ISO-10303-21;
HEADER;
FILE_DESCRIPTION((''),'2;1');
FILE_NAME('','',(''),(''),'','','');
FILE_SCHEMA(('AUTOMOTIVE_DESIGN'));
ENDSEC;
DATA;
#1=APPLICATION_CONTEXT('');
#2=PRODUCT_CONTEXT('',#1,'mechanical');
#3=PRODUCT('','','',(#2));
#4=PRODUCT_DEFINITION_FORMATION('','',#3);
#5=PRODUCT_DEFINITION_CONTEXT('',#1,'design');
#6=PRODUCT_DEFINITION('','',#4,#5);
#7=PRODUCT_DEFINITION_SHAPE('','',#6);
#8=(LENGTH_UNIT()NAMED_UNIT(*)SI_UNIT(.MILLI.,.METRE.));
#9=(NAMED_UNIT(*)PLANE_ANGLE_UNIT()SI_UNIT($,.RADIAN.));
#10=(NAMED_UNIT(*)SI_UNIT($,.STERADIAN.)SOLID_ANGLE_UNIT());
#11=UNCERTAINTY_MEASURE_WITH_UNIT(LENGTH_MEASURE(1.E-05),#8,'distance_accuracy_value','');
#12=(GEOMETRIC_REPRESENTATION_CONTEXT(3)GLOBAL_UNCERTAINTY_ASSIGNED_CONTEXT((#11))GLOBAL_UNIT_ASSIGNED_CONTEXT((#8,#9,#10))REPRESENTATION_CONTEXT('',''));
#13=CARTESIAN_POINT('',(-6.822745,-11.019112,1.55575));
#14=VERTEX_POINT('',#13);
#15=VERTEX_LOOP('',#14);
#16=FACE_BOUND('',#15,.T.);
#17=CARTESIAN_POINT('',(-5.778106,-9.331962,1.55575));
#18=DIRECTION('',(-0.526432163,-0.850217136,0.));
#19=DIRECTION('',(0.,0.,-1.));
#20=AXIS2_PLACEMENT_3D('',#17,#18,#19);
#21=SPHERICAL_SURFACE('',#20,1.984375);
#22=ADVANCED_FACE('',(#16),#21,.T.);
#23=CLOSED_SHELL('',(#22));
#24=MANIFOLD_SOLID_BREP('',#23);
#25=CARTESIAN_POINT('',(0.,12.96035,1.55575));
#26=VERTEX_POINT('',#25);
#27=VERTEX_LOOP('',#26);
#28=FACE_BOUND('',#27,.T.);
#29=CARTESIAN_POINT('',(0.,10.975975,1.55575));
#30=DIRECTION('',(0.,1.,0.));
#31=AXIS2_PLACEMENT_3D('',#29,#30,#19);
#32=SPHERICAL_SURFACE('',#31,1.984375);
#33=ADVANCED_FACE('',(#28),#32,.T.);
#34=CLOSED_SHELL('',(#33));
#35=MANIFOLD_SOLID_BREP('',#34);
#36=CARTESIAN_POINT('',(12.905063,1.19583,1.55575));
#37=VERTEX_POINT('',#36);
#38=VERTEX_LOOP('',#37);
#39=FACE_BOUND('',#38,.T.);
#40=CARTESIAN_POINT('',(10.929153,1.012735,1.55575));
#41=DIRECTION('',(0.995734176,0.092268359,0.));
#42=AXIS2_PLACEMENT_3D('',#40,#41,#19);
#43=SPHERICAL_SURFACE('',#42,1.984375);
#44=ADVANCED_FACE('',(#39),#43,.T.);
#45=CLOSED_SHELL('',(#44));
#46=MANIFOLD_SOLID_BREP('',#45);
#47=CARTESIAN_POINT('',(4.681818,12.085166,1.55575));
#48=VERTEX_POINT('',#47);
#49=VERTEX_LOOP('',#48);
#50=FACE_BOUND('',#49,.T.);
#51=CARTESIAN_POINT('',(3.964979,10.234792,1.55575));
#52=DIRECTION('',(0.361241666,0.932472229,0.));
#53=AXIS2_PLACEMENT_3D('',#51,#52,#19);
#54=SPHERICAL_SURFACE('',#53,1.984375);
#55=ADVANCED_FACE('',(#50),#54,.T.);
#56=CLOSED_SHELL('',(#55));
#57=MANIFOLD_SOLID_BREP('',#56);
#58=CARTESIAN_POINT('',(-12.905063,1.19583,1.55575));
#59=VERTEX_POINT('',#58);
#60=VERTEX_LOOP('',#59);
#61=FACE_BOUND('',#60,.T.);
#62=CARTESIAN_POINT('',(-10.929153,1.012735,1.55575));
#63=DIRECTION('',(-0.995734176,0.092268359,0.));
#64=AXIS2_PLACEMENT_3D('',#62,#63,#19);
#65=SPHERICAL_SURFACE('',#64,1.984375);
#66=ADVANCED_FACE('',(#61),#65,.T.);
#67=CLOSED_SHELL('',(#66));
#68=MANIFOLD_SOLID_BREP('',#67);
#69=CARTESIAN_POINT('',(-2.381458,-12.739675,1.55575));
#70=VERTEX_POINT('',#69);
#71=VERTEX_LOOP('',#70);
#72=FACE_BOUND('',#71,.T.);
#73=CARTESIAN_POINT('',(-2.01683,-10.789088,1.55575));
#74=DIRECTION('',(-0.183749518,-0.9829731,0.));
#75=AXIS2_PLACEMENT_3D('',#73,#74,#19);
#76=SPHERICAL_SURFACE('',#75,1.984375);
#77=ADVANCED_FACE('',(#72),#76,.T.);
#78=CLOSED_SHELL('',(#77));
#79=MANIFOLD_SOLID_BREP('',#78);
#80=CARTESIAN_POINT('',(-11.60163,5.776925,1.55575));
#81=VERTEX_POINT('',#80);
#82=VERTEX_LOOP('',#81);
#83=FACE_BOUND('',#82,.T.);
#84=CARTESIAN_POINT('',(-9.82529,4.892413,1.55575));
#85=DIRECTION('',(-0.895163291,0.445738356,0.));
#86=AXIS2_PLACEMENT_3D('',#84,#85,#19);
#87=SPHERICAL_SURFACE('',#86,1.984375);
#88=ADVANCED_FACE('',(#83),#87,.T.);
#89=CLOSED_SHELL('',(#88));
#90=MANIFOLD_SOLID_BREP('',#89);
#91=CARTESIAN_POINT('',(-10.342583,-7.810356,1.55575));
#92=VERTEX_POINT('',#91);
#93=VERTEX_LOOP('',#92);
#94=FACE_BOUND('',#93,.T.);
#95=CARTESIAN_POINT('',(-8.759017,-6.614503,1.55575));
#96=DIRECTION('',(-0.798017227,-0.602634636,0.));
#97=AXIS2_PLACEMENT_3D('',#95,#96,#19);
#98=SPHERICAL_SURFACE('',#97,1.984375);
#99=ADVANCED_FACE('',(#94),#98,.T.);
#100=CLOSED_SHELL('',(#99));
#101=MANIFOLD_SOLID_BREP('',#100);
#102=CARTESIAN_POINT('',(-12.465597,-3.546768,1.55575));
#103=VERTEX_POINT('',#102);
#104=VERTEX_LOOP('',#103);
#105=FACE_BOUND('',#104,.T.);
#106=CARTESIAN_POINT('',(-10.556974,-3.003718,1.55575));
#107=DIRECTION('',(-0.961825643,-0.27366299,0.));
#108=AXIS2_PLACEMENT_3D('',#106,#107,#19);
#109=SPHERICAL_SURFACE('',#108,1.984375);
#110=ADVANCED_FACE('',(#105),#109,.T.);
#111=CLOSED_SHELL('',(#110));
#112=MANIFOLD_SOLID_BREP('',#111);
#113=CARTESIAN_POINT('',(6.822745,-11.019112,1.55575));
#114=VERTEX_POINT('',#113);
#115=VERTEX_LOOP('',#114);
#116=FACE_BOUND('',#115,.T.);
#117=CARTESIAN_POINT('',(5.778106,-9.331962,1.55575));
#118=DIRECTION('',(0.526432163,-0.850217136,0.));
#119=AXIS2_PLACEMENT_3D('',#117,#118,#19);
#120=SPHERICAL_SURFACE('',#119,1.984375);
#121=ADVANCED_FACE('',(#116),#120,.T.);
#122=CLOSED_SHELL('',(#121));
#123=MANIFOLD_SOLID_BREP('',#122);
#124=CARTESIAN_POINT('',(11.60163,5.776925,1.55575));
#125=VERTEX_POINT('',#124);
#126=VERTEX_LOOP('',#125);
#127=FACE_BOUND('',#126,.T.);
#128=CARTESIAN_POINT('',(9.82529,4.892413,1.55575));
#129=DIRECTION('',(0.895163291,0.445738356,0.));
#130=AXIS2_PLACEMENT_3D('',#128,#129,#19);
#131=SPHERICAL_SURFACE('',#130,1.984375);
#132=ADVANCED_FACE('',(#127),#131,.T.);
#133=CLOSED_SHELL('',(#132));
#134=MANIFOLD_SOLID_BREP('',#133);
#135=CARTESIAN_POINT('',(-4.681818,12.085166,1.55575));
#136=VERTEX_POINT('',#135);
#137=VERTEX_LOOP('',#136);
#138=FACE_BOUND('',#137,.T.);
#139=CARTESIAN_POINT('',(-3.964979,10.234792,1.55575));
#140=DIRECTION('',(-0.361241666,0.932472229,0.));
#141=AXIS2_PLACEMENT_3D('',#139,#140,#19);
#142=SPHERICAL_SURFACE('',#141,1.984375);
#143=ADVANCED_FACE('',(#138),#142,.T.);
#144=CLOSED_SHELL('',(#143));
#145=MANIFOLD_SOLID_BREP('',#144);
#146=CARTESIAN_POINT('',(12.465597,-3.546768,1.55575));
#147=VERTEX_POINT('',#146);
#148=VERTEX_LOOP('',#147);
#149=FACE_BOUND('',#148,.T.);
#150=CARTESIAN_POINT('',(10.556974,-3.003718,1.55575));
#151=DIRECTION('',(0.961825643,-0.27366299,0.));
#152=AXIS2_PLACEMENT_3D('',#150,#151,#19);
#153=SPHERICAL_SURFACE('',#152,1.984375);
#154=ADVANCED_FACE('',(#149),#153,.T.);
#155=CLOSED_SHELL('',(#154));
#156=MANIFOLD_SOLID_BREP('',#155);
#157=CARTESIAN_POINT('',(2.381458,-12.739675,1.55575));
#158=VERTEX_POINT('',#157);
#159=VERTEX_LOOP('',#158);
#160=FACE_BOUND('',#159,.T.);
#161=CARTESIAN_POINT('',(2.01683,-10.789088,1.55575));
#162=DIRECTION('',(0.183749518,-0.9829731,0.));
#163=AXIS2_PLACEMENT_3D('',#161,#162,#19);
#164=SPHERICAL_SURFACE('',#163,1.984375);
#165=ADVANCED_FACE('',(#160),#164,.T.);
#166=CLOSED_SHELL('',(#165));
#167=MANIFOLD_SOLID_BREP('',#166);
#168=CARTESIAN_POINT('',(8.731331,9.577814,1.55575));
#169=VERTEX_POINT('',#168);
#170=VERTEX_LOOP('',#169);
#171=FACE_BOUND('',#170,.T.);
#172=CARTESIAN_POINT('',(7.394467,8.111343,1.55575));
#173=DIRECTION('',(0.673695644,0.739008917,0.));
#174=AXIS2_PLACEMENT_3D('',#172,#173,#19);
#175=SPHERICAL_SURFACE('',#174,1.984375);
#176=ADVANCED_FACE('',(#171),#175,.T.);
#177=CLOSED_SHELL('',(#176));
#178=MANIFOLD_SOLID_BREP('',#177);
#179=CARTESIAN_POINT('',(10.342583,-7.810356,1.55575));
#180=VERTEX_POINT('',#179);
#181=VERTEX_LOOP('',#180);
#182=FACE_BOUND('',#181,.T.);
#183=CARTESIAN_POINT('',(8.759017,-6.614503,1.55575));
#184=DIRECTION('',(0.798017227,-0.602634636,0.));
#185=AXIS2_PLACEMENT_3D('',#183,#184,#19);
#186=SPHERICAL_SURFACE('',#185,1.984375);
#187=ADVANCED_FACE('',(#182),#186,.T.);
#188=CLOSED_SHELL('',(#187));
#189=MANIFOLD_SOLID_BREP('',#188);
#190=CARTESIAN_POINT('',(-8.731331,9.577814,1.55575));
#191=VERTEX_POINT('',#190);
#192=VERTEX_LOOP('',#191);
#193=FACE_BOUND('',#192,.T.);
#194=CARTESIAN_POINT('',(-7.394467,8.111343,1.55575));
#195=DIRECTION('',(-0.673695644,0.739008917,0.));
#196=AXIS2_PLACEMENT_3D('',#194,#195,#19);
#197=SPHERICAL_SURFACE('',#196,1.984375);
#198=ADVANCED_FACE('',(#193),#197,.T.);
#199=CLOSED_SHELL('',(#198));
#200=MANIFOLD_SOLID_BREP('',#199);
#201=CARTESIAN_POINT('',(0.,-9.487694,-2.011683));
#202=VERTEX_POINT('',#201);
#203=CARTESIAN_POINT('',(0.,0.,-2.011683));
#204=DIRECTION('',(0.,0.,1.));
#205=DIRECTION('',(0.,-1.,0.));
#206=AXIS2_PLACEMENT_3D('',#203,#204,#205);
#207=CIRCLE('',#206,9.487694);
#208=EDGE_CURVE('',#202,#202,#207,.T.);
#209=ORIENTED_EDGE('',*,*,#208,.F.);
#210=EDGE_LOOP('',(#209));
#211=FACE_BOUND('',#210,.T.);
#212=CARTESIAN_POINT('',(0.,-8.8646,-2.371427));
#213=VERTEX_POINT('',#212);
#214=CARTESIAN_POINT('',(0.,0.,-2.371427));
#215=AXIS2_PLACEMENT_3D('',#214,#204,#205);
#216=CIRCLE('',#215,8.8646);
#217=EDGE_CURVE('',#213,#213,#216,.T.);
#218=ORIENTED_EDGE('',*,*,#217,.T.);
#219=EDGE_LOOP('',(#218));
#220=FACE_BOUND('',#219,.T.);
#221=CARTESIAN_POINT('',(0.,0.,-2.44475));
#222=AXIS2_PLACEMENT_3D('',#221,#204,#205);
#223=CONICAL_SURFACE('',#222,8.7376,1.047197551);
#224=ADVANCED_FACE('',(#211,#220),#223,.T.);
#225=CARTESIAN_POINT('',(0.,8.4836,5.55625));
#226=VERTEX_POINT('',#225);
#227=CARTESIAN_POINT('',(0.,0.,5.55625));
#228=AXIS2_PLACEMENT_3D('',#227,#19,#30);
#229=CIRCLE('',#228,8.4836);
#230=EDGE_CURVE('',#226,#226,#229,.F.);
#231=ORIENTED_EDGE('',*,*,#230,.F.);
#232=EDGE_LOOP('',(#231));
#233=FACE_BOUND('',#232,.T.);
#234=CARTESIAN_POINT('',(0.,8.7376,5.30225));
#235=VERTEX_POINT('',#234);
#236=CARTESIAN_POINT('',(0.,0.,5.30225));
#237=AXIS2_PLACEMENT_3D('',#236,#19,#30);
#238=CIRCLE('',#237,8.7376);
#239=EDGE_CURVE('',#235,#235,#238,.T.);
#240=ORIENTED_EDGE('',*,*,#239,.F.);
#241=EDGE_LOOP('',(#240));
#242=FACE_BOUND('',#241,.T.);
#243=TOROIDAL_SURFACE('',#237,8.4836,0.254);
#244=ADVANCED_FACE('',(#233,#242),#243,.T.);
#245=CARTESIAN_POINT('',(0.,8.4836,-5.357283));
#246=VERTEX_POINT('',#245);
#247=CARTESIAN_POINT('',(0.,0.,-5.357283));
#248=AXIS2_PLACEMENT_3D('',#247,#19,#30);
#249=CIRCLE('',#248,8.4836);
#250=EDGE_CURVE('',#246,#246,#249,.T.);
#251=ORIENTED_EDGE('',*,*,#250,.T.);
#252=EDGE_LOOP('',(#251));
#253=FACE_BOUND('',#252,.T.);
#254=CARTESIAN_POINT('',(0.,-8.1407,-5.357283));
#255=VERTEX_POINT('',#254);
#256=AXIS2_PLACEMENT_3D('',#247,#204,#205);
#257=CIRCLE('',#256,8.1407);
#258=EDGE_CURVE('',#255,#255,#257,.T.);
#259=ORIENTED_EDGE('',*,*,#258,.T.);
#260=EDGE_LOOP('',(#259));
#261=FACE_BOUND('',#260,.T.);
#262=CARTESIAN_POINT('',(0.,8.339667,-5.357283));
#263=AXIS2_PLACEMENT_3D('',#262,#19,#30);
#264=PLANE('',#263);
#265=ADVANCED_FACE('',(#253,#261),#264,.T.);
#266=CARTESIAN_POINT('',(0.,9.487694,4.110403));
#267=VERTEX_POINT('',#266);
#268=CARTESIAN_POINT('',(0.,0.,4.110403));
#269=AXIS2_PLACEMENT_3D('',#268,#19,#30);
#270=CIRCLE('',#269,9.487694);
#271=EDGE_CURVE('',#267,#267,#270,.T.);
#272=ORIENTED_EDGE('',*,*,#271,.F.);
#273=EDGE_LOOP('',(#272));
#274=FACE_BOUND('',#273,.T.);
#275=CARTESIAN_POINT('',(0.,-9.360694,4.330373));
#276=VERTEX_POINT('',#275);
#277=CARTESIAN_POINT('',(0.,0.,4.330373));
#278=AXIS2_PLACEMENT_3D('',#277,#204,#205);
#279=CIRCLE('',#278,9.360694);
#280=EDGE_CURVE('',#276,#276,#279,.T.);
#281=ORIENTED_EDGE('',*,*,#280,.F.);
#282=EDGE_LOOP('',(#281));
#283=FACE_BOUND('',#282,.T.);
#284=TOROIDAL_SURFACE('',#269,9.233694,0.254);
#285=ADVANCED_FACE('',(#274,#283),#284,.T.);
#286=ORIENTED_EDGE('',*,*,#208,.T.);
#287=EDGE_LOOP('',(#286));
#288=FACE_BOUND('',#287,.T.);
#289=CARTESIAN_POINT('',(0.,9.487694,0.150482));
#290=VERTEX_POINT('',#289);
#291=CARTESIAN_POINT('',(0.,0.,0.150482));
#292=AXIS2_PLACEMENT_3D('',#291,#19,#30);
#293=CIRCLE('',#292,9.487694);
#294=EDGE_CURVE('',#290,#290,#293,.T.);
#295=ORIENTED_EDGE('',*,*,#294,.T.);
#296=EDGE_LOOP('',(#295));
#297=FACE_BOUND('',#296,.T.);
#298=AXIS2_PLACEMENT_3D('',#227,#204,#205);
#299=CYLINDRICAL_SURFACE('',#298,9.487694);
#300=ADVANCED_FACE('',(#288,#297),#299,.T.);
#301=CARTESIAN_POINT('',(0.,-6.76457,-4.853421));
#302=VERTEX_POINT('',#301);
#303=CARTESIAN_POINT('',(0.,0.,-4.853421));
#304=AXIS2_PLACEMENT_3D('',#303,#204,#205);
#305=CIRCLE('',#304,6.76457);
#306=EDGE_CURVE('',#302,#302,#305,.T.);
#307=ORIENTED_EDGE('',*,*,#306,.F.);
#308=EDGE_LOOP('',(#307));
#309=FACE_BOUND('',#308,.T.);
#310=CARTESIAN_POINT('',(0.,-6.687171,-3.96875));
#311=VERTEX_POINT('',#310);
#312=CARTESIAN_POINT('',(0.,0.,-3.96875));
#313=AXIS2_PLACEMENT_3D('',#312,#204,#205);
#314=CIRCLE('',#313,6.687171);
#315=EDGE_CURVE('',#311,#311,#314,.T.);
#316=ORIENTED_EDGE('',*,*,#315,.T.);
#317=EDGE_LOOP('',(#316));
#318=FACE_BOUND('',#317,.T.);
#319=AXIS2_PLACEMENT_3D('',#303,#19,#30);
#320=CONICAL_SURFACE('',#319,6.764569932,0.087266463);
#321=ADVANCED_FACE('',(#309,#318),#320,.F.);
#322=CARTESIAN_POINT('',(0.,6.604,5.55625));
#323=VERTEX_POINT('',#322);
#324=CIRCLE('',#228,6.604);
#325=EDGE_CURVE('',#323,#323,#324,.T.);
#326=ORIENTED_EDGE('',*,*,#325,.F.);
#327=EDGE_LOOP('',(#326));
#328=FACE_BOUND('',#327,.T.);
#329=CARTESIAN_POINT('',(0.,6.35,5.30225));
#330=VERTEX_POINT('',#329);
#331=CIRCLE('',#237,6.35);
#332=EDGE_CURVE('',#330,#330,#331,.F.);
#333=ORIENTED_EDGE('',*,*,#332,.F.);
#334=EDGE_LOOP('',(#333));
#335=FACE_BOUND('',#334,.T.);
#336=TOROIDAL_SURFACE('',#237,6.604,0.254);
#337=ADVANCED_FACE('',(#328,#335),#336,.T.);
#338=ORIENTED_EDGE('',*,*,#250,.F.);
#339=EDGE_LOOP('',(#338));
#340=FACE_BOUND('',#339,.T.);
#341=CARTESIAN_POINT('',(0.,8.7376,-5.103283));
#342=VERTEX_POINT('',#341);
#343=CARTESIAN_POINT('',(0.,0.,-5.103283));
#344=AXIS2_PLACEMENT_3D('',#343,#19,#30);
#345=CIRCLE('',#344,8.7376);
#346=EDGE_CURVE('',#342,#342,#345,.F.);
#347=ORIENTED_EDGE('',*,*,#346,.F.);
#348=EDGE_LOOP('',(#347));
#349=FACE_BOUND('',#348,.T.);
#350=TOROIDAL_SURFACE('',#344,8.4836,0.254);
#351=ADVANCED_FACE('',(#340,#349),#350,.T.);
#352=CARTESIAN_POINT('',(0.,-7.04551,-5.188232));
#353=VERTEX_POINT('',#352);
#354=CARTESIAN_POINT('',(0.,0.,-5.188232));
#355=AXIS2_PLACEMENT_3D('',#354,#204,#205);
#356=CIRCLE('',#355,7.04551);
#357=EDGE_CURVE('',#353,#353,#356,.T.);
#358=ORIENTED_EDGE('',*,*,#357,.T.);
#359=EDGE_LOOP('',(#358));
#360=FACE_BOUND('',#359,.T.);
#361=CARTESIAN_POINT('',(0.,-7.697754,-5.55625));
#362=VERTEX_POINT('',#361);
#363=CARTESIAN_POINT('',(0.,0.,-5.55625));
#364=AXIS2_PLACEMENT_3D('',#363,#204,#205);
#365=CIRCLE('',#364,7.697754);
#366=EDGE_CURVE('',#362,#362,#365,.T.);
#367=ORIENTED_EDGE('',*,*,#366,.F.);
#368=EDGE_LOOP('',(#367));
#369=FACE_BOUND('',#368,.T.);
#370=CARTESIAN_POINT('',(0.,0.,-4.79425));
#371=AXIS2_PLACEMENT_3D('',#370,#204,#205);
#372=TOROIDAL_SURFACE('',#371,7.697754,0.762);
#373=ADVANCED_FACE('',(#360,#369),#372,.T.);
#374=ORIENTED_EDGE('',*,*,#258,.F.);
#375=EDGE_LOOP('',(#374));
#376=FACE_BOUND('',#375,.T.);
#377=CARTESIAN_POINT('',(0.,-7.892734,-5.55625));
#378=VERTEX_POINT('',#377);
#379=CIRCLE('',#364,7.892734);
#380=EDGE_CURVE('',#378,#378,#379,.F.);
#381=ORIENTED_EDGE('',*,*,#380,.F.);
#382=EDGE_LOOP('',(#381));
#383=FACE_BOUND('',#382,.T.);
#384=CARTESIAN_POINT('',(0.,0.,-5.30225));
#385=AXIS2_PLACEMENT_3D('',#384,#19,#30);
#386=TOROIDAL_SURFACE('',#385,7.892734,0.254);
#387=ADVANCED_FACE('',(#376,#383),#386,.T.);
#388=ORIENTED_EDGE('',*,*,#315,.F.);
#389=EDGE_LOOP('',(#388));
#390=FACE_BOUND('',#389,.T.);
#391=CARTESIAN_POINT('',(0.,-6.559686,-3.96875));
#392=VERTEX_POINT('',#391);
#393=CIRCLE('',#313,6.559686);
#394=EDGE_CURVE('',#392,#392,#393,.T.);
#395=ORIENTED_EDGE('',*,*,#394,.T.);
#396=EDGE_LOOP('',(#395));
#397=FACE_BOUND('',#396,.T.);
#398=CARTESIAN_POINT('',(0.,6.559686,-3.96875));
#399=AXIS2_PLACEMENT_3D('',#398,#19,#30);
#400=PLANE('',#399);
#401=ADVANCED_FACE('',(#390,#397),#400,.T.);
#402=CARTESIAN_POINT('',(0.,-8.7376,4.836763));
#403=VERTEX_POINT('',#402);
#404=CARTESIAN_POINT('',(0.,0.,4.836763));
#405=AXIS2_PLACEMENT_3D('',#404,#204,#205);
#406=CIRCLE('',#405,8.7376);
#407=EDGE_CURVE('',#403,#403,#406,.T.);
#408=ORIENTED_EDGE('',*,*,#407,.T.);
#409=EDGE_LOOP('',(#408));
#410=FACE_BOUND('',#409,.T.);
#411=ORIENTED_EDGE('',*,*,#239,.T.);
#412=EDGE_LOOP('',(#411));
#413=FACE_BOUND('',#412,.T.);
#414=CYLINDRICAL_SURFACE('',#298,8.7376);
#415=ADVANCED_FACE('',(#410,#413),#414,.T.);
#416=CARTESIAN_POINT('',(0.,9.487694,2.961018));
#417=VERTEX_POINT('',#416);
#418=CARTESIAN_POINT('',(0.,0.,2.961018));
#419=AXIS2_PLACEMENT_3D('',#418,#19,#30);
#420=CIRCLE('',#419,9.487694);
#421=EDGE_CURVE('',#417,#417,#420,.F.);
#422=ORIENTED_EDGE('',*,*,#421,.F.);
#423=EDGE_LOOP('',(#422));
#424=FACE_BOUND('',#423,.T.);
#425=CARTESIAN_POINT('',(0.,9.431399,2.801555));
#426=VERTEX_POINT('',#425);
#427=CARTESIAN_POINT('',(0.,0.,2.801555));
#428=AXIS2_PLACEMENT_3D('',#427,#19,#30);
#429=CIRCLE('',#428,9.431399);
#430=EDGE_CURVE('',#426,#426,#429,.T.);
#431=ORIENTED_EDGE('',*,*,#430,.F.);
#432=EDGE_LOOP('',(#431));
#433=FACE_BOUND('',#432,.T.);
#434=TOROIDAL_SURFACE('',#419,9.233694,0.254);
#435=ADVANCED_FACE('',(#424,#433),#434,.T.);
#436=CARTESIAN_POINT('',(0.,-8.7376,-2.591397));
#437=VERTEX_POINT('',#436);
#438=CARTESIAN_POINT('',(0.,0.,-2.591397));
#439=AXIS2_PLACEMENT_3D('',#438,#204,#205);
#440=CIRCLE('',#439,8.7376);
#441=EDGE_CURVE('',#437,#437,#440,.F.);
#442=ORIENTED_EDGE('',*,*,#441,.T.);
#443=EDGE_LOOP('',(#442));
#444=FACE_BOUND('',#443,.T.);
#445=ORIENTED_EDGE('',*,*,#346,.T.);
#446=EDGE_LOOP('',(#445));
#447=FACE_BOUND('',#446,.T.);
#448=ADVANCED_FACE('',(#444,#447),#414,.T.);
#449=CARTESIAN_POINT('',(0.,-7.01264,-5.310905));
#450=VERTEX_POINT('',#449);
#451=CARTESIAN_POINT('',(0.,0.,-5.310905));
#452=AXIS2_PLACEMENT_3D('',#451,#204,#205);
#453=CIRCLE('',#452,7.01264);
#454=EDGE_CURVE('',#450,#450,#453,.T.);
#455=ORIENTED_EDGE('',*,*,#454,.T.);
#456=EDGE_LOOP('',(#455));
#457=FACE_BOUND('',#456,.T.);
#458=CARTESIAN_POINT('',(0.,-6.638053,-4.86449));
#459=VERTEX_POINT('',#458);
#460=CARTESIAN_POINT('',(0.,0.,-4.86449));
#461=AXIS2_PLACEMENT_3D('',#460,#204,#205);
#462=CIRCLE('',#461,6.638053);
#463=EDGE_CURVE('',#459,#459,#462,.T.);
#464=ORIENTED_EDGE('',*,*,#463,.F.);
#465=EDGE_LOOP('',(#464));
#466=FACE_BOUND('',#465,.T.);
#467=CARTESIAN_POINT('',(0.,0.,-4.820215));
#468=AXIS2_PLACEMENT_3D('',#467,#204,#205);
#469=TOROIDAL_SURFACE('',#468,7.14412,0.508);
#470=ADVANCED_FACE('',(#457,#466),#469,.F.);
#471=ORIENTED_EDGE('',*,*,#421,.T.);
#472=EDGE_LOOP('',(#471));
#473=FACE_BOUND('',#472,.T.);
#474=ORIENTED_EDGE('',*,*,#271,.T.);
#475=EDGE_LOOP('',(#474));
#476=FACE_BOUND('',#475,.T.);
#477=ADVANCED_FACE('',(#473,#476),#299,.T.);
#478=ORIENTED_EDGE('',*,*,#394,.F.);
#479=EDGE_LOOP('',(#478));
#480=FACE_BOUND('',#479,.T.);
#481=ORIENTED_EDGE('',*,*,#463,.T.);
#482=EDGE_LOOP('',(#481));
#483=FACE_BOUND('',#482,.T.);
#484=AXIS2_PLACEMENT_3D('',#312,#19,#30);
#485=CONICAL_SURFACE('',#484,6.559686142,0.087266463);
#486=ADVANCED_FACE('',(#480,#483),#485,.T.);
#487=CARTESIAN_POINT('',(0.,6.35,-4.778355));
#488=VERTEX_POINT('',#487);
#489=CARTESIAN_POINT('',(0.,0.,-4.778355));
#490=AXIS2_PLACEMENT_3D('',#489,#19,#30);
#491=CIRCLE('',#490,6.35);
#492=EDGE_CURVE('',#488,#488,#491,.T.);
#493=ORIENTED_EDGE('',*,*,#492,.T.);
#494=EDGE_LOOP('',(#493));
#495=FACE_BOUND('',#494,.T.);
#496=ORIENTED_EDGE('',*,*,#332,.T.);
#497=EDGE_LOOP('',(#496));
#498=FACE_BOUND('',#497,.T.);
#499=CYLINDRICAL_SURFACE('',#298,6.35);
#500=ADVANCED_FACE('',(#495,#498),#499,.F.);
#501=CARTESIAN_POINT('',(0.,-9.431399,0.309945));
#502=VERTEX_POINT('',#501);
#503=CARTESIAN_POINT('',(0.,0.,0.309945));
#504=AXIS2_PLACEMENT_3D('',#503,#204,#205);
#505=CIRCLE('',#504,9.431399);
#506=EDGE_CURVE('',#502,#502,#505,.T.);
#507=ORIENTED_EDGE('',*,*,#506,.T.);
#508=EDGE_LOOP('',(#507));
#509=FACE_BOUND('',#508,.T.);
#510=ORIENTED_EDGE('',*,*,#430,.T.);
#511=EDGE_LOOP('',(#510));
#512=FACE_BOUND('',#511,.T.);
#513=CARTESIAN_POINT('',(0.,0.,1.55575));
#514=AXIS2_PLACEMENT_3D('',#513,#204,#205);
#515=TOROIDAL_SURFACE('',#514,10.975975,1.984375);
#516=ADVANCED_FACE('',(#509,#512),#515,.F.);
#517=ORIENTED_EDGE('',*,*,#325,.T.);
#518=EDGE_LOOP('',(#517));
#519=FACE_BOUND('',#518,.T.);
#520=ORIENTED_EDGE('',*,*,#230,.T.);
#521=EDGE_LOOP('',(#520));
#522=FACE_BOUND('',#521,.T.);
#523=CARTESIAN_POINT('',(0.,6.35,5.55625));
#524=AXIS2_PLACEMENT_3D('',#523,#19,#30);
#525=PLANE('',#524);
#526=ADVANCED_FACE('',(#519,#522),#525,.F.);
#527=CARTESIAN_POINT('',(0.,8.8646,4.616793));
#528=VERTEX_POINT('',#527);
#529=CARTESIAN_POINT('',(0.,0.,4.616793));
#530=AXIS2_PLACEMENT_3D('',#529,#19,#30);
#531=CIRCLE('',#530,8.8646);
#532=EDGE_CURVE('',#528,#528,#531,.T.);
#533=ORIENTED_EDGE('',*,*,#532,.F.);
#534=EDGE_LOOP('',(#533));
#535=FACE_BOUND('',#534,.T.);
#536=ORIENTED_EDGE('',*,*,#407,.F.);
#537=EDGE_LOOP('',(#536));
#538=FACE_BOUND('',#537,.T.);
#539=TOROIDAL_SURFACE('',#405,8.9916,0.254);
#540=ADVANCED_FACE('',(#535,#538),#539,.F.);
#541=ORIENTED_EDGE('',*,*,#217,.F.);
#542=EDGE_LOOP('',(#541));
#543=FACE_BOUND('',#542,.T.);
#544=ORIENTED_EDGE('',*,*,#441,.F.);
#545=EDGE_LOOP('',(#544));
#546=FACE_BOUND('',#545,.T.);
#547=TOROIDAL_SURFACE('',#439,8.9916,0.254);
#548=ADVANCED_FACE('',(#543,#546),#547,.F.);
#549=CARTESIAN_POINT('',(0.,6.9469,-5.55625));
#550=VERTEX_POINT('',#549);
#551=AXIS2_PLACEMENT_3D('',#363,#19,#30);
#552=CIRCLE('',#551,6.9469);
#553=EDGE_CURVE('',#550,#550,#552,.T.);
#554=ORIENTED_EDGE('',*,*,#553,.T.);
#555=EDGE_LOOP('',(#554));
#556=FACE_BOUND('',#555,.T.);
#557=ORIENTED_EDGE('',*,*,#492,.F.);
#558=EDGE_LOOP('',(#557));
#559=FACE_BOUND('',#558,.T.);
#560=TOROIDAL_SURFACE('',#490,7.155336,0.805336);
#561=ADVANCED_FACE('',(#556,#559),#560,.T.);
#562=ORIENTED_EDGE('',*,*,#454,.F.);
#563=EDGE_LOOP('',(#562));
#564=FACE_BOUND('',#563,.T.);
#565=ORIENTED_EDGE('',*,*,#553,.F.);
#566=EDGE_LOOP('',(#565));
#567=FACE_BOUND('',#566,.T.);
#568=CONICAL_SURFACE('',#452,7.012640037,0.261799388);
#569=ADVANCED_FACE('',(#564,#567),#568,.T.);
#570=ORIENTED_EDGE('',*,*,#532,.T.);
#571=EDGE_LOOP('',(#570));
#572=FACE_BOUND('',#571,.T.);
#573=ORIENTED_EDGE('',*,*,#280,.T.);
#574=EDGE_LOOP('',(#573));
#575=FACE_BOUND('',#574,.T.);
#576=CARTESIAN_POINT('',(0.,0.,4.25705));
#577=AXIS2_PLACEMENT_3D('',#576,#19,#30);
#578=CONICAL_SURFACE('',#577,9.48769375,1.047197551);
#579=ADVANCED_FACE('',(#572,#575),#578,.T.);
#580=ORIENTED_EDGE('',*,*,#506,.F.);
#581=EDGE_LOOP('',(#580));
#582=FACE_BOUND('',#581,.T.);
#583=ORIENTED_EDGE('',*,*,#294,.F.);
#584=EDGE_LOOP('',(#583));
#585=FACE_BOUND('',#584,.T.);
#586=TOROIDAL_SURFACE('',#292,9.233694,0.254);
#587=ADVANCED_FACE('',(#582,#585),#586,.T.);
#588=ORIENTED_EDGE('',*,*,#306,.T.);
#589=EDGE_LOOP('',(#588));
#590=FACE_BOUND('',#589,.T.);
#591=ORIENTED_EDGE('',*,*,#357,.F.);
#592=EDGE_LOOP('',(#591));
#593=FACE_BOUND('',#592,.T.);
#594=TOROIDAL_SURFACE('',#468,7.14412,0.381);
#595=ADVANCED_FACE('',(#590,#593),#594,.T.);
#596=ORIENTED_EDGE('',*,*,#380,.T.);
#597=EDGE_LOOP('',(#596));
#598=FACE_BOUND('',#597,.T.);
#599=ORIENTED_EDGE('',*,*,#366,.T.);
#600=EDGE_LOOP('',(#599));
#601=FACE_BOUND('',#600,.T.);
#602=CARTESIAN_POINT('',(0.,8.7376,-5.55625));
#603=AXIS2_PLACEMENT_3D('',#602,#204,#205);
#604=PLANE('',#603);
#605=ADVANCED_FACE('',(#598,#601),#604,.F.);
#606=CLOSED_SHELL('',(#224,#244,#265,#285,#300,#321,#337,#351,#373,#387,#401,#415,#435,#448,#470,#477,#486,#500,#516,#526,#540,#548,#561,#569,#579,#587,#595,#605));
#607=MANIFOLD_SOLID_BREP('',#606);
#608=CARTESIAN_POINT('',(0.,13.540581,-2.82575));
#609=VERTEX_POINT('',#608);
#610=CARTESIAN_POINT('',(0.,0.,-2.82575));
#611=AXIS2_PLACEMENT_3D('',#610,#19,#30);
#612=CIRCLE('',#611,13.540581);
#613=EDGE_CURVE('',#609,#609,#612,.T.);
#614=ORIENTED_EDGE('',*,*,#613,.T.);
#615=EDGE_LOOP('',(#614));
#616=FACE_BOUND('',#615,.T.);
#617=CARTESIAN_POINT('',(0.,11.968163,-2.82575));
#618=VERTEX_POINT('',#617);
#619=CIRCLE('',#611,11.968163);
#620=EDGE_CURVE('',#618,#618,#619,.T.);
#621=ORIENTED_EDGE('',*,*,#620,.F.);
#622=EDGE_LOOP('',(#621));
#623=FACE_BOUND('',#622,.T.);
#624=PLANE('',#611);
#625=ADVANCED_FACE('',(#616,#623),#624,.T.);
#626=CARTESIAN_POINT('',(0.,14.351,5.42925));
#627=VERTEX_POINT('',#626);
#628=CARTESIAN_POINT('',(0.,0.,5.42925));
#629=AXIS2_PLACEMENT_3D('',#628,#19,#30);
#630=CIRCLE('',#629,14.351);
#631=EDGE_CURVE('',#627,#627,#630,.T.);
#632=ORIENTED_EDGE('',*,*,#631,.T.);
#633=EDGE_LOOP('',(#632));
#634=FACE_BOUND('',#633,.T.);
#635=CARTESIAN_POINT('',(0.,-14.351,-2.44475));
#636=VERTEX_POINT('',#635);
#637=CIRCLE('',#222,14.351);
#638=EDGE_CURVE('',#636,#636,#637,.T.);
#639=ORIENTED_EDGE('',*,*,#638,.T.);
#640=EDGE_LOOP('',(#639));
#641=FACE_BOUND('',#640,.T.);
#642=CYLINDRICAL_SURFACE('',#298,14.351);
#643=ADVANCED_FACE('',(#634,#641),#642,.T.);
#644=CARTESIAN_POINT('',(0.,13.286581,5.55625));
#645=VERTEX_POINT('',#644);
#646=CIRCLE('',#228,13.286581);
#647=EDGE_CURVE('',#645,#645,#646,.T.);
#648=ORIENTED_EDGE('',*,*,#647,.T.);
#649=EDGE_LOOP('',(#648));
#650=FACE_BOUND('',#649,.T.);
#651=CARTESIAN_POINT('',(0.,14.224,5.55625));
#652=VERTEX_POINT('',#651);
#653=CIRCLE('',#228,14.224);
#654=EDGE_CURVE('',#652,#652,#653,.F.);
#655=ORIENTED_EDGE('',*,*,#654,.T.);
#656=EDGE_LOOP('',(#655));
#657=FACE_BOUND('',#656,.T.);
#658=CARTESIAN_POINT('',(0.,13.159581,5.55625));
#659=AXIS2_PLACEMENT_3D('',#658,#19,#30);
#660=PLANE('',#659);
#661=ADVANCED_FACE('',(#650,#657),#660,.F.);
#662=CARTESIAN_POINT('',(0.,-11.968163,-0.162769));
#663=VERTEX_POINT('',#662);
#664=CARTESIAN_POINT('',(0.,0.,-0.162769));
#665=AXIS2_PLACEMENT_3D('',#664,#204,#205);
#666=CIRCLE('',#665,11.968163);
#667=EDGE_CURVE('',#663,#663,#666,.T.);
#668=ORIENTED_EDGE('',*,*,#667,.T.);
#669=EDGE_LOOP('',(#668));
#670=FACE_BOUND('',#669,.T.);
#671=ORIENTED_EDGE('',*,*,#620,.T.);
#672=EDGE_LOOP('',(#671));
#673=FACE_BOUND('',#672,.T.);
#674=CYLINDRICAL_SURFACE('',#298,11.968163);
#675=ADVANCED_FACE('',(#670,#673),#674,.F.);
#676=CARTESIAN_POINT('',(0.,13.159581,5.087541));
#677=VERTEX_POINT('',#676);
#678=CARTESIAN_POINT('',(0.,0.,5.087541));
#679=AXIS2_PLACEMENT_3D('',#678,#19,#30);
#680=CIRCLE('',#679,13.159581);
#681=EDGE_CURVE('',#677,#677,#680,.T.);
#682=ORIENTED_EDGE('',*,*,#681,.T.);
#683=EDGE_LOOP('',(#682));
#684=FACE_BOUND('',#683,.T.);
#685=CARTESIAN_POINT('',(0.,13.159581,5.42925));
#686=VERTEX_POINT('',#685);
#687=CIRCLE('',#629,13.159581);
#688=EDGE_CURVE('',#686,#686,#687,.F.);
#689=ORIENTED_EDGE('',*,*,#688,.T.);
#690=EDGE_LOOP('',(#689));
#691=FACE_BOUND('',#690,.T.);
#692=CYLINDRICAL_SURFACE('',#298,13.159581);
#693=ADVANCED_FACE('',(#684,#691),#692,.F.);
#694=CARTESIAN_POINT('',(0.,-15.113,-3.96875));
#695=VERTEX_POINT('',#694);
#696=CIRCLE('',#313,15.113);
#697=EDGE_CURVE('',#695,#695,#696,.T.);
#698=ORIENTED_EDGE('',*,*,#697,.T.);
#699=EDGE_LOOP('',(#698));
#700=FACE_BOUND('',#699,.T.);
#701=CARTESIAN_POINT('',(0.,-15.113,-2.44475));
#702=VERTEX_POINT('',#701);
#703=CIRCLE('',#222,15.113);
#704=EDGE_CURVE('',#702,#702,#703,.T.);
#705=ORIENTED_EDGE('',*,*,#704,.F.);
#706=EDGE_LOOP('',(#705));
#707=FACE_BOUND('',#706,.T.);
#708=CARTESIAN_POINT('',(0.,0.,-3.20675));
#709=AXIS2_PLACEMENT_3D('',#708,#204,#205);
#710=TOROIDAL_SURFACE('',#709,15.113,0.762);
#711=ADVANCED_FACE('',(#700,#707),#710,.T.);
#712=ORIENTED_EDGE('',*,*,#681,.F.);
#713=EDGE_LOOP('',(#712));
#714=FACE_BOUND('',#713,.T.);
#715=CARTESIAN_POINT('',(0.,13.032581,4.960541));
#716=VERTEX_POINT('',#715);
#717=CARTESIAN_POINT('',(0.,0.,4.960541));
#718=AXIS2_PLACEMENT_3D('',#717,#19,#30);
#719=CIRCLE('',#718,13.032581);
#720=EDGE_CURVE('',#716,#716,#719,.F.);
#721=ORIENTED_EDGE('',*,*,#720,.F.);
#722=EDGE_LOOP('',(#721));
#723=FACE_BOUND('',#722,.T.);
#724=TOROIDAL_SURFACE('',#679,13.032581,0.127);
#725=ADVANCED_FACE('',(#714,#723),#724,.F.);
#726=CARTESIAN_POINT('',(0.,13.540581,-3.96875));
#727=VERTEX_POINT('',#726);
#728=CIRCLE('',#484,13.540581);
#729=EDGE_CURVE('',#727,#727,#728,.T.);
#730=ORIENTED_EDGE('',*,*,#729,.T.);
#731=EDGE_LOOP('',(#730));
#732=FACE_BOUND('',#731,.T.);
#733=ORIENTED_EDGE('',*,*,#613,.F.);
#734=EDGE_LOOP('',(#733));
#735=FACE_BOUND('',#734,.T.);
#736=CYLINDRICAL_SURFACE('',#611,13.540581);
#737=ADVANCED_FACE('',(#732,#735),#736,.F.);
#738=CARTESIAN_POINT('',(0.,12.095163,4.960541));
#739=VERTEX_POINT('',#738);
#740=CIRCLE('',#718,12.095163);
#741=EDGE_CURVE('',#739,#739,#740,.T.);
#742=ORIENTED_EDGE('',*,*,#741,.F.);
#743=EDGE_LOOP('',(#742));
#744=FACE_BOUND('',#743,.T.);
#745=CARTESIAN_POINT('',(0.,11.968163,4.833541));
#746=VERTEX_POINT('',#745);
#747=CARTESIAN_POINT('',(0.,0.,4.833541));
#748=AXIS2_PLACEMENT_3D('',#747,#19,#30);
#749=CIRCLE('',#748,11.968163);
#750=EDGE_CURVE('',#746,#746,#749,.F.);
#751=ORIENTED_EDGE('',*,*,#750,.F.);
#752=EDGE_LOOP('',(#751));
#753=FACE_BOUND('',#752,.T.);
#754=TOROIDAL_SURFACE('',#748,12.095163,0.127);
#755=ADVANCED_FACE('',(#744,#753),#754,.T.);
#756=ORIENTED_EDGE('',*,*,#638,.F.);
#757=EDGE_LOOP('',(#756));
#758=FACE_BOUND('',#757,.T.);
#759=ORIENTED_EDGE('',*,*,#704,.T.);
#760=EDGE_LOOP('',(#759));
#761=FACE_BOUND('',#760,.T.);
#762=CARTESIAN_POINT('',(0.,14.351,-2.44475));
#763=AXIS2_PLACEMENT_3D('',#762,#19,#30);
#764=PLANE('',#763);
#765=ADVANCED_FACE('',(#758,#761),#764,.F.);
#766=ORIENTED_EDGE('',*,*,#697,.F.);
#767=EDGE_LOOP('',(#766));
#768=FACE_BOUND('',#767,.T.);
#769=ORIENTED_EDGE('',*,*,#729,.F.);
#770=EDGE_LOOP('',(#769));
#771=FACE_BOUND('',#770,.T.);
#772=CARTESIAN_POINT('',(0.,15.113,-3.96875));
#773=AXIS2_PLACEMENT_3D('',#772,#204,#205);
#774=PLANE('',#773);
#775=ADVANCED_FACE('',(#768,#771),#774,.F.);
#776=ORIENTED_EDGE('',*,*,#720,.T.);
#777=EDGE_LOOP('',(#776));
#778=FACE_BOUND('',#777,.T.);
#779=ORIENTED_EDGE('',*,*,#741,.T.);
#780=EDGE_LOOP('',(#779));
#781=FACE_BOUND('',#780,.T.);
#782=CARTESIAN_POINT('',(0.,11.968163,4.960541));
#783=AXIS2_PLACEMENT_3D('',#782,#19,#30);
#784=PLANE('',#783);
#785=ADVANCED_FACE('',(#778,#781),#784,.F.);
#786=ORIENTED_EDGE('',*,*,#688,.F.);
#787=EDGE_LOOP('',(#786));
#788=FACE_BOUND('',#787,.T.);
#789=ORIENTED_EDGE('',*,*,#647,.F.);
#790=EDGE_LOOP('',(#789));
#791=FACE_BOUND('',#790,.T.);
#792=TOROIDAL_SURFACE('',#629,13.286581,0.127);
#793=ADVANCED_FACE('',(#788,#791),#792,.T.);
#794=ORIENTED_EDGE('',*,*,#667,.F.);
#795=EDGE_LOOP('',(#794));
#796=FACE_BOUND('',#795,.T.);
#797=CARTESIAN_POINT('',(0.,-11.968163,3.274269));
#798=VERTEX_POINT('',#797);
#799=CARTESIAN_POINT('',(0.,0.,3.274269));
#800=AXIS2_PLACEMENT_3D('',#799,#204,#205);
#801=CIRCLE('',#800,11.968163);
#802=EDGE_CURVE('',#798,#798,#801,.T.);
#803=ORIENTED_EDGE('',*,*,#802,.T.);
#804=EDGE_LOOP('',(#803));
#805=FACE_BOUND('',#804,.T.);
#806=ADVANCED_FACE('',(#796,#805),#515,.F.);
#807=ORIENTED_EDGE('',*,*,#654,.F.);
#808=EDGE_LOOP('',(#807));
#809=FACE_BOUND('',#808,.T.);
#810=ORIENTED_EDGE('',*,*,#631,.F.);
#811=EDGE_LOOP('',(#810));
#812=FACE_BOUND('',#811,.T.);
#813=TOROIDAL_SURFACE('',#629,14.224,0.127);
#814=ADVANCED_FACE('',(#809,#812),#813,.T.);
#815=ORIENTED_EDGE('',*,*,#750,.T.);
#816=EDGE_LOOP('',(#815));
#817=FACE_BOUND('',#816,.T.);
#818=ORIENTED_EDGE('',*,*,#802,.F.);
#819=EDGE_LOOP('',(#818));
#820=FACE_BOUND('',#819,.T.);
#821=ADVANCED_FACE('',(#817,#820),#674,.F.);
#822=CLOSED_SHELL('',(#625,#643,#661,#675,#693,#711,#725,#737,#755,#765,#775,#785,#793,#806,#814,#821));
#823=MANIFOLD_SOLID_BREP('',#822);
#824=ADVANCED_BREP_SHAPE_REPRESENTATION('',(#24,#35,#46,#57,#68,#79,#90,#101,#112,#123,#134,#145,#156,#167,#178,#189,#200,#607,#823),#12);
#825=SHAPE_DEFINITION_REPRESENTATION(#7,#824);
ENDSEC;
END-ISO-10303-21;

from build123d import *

# Parameters (mm, degrees)
FILLET4_R          = 0.762
CIRPATTERN3_COUNT  = 17
FILLET2_R          = 0.127
FILLET3_R          = 0.127
FILLET5_R          = 0.254
SKETCH12_R         = 13.540581249999997
SKETCH12_R_2       = 11.968162499999998
CUT_EXTRUDE1_DEPTH = 1.143


with BuildPart() as part:
    # Sketch2 → Revolve1 (revolve)
    with BuildSketch(Plane(origin=(0, 0, 0), x_dir=(0, 0, -1), z_dir=(1, 0, 0)), mode=Mode.PRIVATE) as revolve1_sk:
        with BuildLine():
            Line((2.44475, 14.350999999999997), (-5.5562499999999995, 14.350999999999996))
            Line((-5.5562499999999995, 14.350999999999996), (-5.5562499999999995, 13.159581249999999))
            Line((-5.5562499999999995, 13.159581249999999), (-4.960540625000001, 13.159581249999999))
            Line((-4.960540625000001, 13.159581249999999), (-4.960540625000001, 11.9681625))
            Line((-4.960540625000001, 11.9681625), (-3.274269160634745, 11.9681625))
            ThreePointArc((-3.274269160634745, 11.9681625), (-1.55575, 12.96035), (0.1627691606347452, 11.9681625))
            Line((0.1627691606347452, 11.9681625), (3.9687500000000027, 11.9681625))
            Line((3.9687500000000027, 11.9681625), (3.96875, 15.112999999999998))
            ThreePointArc((3.96875, 15.112999999999998), (3.2067500000000018, 15.874999999999998), (2.4447500000000018, 15.113))
            Line((2.4447500000000018, 15.113), (2.44475, 14.350999999999997))
        make_face()
    revolve(revolve1_sk.sketch.rotate(Axis((0, 0, 5.5562499999999995), (0, 1.8e-16, -1)), 180), axis=Axis((0, 0, 5.5562499999999995), (0, 1.8e-16, -1)))

    # Fillet2
    fillet2_edges = [part.edges().sort_by_distance(p)[0] for p in [
        (-2.93e-15, 11.9681625, 4.960540625),
        (-3.22e-15, 13.159581249999999, 4.960540625000002),
    ]]
    fillet(fillet2_edges, radius=FILLET2_R)

    # Fillet3
    fillet3_edges = [part.edges().sort_by_distance(p)[0] for p in [
        (-3.22e-15, 13.159581249999999, 5.55625),
        (-3.51e-15, 14.350999999999996, 5.5562499999999995),
    ]]
    fillet(fillet3_edges, radius=FILLET3_R)

    # Sketch12 → Cut-Extrude1 (cut)
    with BuildSketch(Plane(origin=(0, 7.3e-16, -3.9687500000000044), x_dir=(-1, 0, 0), z_dir=(0, 1.8e-16, -1))):
        with Locations(Location((0, 1.02e-15, 0), (0, 0, 90))):
            Circle(SKETCH12_R)
        with Locations(Location((0, 1.02e-15, 0), (0, 0, 270))):
            Circle(SKETCH12_R_2, mode=Mode.SUBTRACT)
    extrude(amount=-CUT_EXTRUDE1_DEPTH, mode=Mode.SUBTRACT)


with BuildPart() as body_2:
    # Sketch3 → Revolve2 (revolve)
    with BuildSketch(Plane(origin=(0, 0, 0), x_dir=(0, 0, -1), z_dir=(1, 0, 0)), mode=Mode.PRIVATE) as revolve2_sk:
        with BuildLine():
            Line((-5.5562499999999995, 8.7376), (-4.690116343040088, 8.7376))
            Line((-4.690116343040088, 8.7376), (-4.257049514560134, 9.487693750000002))
            Line((-4.257049514560134, 9.487693750000002), (-2.8682906894734495, 9.487693750000002))
            ThreePointArc((-2.8682906894734495, 9.487693750000002), (-1.5557499999999995, 8.991600000000002), (-0.24320931052655032, 9.487693750000002))
            Line((-0.24320931052655032, 9.487693750000002), (2.0116831715200463, 9.487693750000002))
            Line((2.0116831715200463, 9.487693750000002), (2.44475, 8.737600000000002))
            Line((2.44475, 8.737600000000002), (5.55625, 8.7376))
            Line((5.55625, 8.7376), (5.55625, 6.350000000000001))
            Line((5.55625, 6.350000000000001), (-5.5562499999999995, 6.35))
            Line((-5.5562499999999995, 6.35), (-5.5562499999999995, 8.7376))
        make_face()
    revolve(revolve2_sk.sketch.rotate(Axis((0, 0, 5.5562499999999995), (0, 1.8e-16, -1)), 180), axis=Axis((0, 0, 5.5562499999999995), (0, 1.8e-16, -1)))

    # Sketch5 → Cut-Revolve2 (revolve, cut)
    with BuildSketch(Plane(origin=(0, 0, 0), x_dir=(0, 0, -1), z_dir=(1, 0, 0)), mode=Mode.PRIVATE) as cut_revolve2_sk:
        with BuildLine():
            Line((5.55625, 6.9469), (5.55625, 6.350000000000001))
            Line((5.55625, 6.350000000000001), (4.486349594525831, 6.350000000000001))
            Line((4.486349594525831, 6.350000000000001), (4.88662719634144, 6.38501975242221))
            ThreePointArc((4.88662719634144, 6.38501975242221), (5.310018678948872, 6.560394246711456), (5.55625, 6.9469))
        make_face()
    revolve(cut_revolve2_sk.sketch.rotate(Axis((0, 0, 5.5562499999999995), (0, 1.8e-16, -1)), 180), axis=Axis((0, 0, 5.5562499999999995), (0, 1.8e-16, -1)), mode=Mode.SUBTRACT)

    # Sketch6 → Cut-Revolve3 (revolve, cut)
    with BuildSketch(Plane(origin=(0, 0, 0), x_dir=(0, 0, -1), z_dir=(1, 0, 0)), mode=Mode.PRIVATE) as cut_revolve3_sk:
        with BuildLine():
            Line((5.310904840122577, 7.012640037456041), (5.55625, 6.9469))
            Line((5.55625, 6.9469), (5.55625, 7.045510056184058))
            Line((5.55625, 7.045510056184058), (5.188232260183865, 7.0455100561840585))
            ThreePointArc((5.188232260183865, 7.0455100561840585), (5.0651165996583005, 6.852257179539788), (4.853420858354586, 6.764569932395164))
            Line((4.853420858354586, 6.764569932395164), (3.968750000000001, 6.687171261337388))
            Line((3.968750000000001, 6.687171261337388), (3.96875, 6.559686141969385))
            Line((3.96875, 6.559686141969385), (4.864489637683538, 6.638053205737512))
            ThreePointArc((4.864489637683538, 6.638053205737512), (5.146750626088492, 6.754969535263678), (5.310904840122577, 7.012640037456041))
        make_face()
    revolve(cut_revolve3_sk.sketch.rotate(Axis((0, 0, 5.5562499999999995), (0, 1.8e-16, -1)), 180), axis=Axis((0, 0, 5.5562499999999995), (0, 1.8e-16, -1)), mode=Mode.SUBTRACT)

    # Fillet4
    # the kernel refuses this fillet: 0.762 mm, written as the material it takes off along each edge
    with BuildSketch(Plane(origin=(0, 2.04e-15, -5.556250000000001), x_dir=(1.2e-16, -1, -1.3e-16), z_dir=(1, 1.2e-16, 0))) as fillet4_piece_1:
        with BuildLine():
            CenterArc((7.697753859267347, -0.7619999999999979), FILLET4_R, 90, 58.86628583256041)
            Line((7.045510056184135, -0.3680177398161817), (7.032465180122471, -0.36013809461250545))
            ThreePointArc((7.032465180122471, -0.36013809461250545), (7.030270056184055, -0.18400886990808996), (7.030270056184055, 8.9e-16))
            Line((7.030270056184055, 8.9e-16), (7.045510056184056, 0.01524000000000125))
            Line((7.045510056184056, 0.01524000000000125), (7.697753859267347, 0.01524000000000295))
            Line((7.697753859267347, 0.01524000000000295), (7.697753859267347, 2.58e-15))
        make_face()
    revolve(axis=Axis((0, 2.04e-15, -5.556250000000001), (0, 1.8e-16, -1)), mode=Mode.SUBTRACT)

    # Sketch14 → Revolve4 (revolve)
    with BuildSketch(Plane(origin=(0, 0, 0), x_dir=(0, 0, -1), z_dir=(1, 0, 0)), mode=Mode.PRIVATE) as revolve4_sk:
        with BuildLine():
            Line((4.486349594525832, 6.350000000000002), (4.778354774951089, 6.350000000000003))
            ThreePointArc((4.778354774951089, 6.350000000000003), (5.26861251103332, 6.516420076453832), (5.556250000000002, 6.9469))
            Line((5.556250000000002, 6.9469), (5.433577420061289, 6.979770018728019))
            ThreePointArc((5.433577420061289, 6.979770018728019), (5.13515953827062, 6.578421647285627), (4.642781425733349, 6.49068601184526))
            Line((4.642781425733349, 6.49068601184526), (4.486349594525832, 6.477000000000003))
            Line((4.486349594525832, 6.477000000000003), (4.486349594525832, 6.350000000000002))
        make_face()
    revolve(revolve4_sk.sketch.rotate(Axis((0, 1.38e-15, -3.843895860272255), (0, -3.1e-16, 1)), 180), axis=Axis((0, 1.38e-15, -3.843895860272255), (0, -3.1e-16, 1)))

    # Sketch7 → Cut-Revolve4 (revolve, cut)
    with BuildSketch(Plane(origin=(0, 0, 0), x_dir=(0, 0, -1), z_dir=(1, 0, 0)), mode=Mode.PRIVATE) as cut_revolve4_sk:
        Polygon((5.55625, 8.140699999999999), (5.55625, 8.7376), (5.357283333333334, 8.7376), (5.357283333333334, 8.538633333333333), (5.357283333333334, 8.339666666666666), (5.357283333333334, 8.140699999999999), align=None)
    revolve(cut_revolve4_sk.sketch.rotate(Axis((0, 0, 5.5562499999999995), (0, 1.8e-16, -1)), 180), axis=Axis((0, 0, 5.5562499999999995), (0, 1.8e-16, -1)), mode=Mode.SUBTRACT)

    # Fillet5
    # the kernel refuses this fillet: 0.254 mm, written as the material it adds along each edge
    with BuildSketch(Plane(origin=(0, 1.6e-16, 4.690116343040086), x_dir=(1.2e-16, -1, -2e-16), z_dir=(1, 1.2e-16, 0))) as fillet5_piece_1:
        with BuildLine():
            CenterArc((8.7376 + FILLET5_R, -FILLET5_R * 0.57735026919), FILLET5_R, 120.00000000000017, 59.99999999999983)
            Line((8.7376 + FILLET5_R * 0.5, FILLET5_R * 0.288675134595), (8.7376, 0))
            Line((8.7376, 0), (8.7376, -FILLET5_R * 0.57735026919))
        make_face()
    revolve(axis=Axis((0, 1.6e-16, 4.690116343040086), (0, 1.8e-16, -1)))
    with BuildSketch(Plane(origin=(0, 1.47e-15, -2.4447500000000018), x_dir=(1.2e-16, -1, -2e-16), z_dir=(1, 1.2e-16, 0))) as fillet5_piece_2:
        with BuildLine():
            CenterArc((8.7376 + FILLET5_R, FILLET5_R * 0.57735026919), FILLET5_R, 180.00000000000028, 60.00000000000006)
            Line((8.7376, FILLET5_R * 0.57735026919), (8.7376, -4.4e-16))
            Line((8.7376, -4.4e-16), (8.7376 + FILLET5_R * 0.5, -FILLET5_R * 0.288675134595))
        make_face()
    revolve(axis=Axis((0, 1.47e-15, -2.4447500000000018), (0, 1.8e-16, -1)))
    # the kernel refuses this fillet: 0.254 mm, written as the material it takes off along each edge
    with BuildSketch(Plane(origin=(0, 0, 5.556249999999998), x_dir=(1.2e-16, -1, -1.4e-16), z_dir=(1, 1.2e-16, 0))) as fillet5_2_piece_1:
        with BuildLine():
            CenterArc((6.35 + FILLET5_R, FILLET5_R), FILLET5_R, 180.00000000000017, 89.99999999999983)
            Line((6.35, FILLET5_R), (6.35, 8.9e-16))
            Line((6.35, 8.9e-16), (6.35 + FILLET5_R, 8.5e-16))
        make_face()
    revolve(axis=Axis((0, 0, 5.556249999999998), (0, 1.8e-16, -1)), mode=Mode.SUBTRACT)
    with BuildSketch(Plane(origin=(0, 2.04e-15, -5.556250000000001), x_dir=(1.2e-16, -1, -2.2e-16), z_dir=(1, 1.2e-16, 0))) as fillet5_2_piece_2:
        with BuildLine():
            CenterArc((7.892733606666686, -0.2539999999999995), FILLET5_R, 12.513325362831626, 77.48667463716838)
            Line((7.892733606666686, 5e-17), (8.140699999999997, -8.9e-16))
            Line((8.140699999999997, -8.9e-16), (8.14069999999902, -0.198966666666883))
        make_face()
    revolve(axis=Axis((0, 2.04e-15, -5.556250000000001), (0, 1.8e-16, -1)), mode=Mode.SUBTRACT)
    with BuildSketch(Plane(origin=(0, 2e-15, -5.357283333333336), x_dir=(1.2e-16, -1, -2e-16), z_dir=(1, 1.2e-16, 0))) as fillet5_2_piece_3:
        with BuildLine():
            CenterArc((8.737599999999999 - FILLET5_R, -FILLET5_R), FILLET5_R, 1.8783e-13, 90.00000000000061)
            Line((8.737599999999999 - FILLET5_R, 9.4e-16), (8.737599999999999, 0))
            Line((8.737599999999999, 0), (8.7376, -FILLET5_R))
        make_face()
    revolve(axis=Axis((0, 2e-15, -5.357283333333336), (0, 1.8e-16, -1)), mode=Mode.SUBTRACT)
    with BuildSketch(Plane(origin=(0, 0, 5.556249999999998), x_dir=(1.2e-16, -1, -2e-16), z_dir=(1, 1.2e-16, 0))) as fillet5_2_piece_4:
        with BuildLine():
            CenterArc((8.7376 - FILLET5_R, FILLET5_R), FILLET5_R, 270, 90.00000000000017)
            Line((8.7376 - FILLET5_R, -8.4e-16), (8.7376, 0))
            Line((8.7376, 0), (8.7376, FILLET5_R))
        make_face()
    revolve(axis=Axis((0, 0, 5.556249999999998), (0, 1.8e-16, -1)), mode=Mode.SUBTRACT)
    with BuildSketch(Plane(origin=(0, 2.4e-16, 4.257049514560133), x_dir=(1.2e-16, -1, -1.9e-16), z_dir=(1, 1.2e-16, 0))) as fillet5_2_piece_5:
        with BuildLine():
            CenterArc((9.487693750000002 - FILLET5_R, FILLET5_R * 0.57735026919), FILLET5_R, 299.9999999999997, 60.00000000000028)
            Line((9.48769375, FILLET5_R * 0.57735026919), (9.487693750000002, 0))
            Line((9.487693750000002, 0), (9.487693750000002 - FILLET5_R * 0.5, -FILLET5_R * 0.288675134595))
        make_face()
    revolve(axis=Axis((0, 2.4e-16, 4.257049514560133), (0, 1.8e-16, -1)), mode=Mode.SUBTRACT)
    with BuildSketch(Plane(origin=(0, 4.9e-16, 2.8682906894734477), x_dir=(1.2e-16, -1, -1.9e-16), z_dir=(1, 1.2e-16, 0))) as fillet5_2_piece_6:
        with BuildLine():
            CenterArc((9.233693750000002, -0.09272750077474741), FILLET5_R, 360, 38.888534569344074)
            ThreePointArc((9.431399423758867, 0.06673555627469387), (9.459179515850213, 0.03305813785822177), (9.487693750000002, 0))
            Line((9.487693750000002, 0), (9.487693750000002, -0.09272750077474745))
        make_face()
    revolve(axis=Axis((0, 4.9e-16, 2.8682906894734477), (0, 1.8e-16, -1)), mode=Mode.SUBTRACT)
    with BuildSketch(Plane(origin=(0, 9.8e-16, 0.2432093105265487), x_dir=(1.2e-16, -1, -1.8e-16), z_dir=(1, 1.2e-16, 0))) as fillet5_2_piece_7:
        with BuildLine():
            CenterArc((9.233693750000002, 0.0927275007747528), FILLET5_R, 321.1114654306559, 38.888534569344124)
            Line((9.487693750000002, 0.09272750077475314), (9.487693750000002, 0))
            ThreePointArc((9.487693750000002, 0), (9.459179515850213, -0.03305813785821739), (9.431399423758867, -0.06673555627468837))
        make_face()
    revolve(axis=Axis((0, 9.8e-16, 0.2432093105265487), (0, 1.8e-16, -1)), mode=Mode.SUBTRACT)


with BuildPart() as body_3:
    # Sketch11 → Revolve3 (revolve)
    with BuildSketch(Plane(origin=(0, 0, 0), x_dir=(0, 0, -1), z_dir=(1, 0, 0))):
        with BuildLine():
            Line((-1.5557499999999997, 12.96035), (-1.5557499999999993, 8.9916))
            ThreePointArc((-1.5557499999999993, 8.9916), (0.42862500000000026, 10.975975), (-1.5557499999999997, 12.96035))
        make_face()
    revolve(axis=Axis((0, 12.96035, 1.5557499999999997), (0, -1, -1.1e-16)))


with BuildPart() as cirpattern3_1:
    # CirPattern3: pattern copy
    add(body_3.part.rotate(Axis((1e-16, -4.9e-16, 0), (0, 0, 1)), 1 * 360 / CIRPATTERN3_COUNT))


with BuildPart() as cirpattern3_2:
    # CirPattern3: pattern copy
    add(body_3.part.rotate(Axis((1e-16, -4.9e-16, 0), (0, 0, 1)), 2 * 360 / CIRPATTERN3_COUNT))


with BuildPart() as cirpattern3_3:
    # CirPattern3: pattern copy
    add(body_3.part.rotate(Axis((1e-16, -4.9e-16, 0), (0, 0, 1)), 3 * 360 / CIRPATTERN3_COUNT))


with BuildPart() as cirpattern3_4:
    # CirPattern3: pattern copy
    add(body_3.part.rotate(Axis((1e-16, -4.9e-16, 0), (0, 0, 1)), 4 * 360 / CIRPATTERN3_COUNT))


with BuildPart() as cirpattern3_5:
    # CirPattern3: pattern copy
    add(body_3.part.rotate(Axis((1e-16, -4.9e-16, 0), (0, 0, 1)), 5 * 360 / CIRPATTERN3_COUNT))


with BuildPart() as cirpattern3_6:
    # CirPattern3: pattern copy
    add(body_3.part.rotate(Axis((1e-16, -4.9e-16, 0), (0, 0, 1)), 6 * 360 / CIRPATTERN3_COUNT))


with BuildPart() as cirpattern3_7:
    # CirPattern3: pattern copy
    add(body_3.part.rotate(Axis((1e-16, -4.9e-16, 0), (0, 0, 1)), 7 * 360 / CIRPATTERN3_COUNT))


with BuildPart() as cirpattern3_8:
    # CirPattern3: pattern copy
    add(body_3.part.rotate(Axis((1e-16, -4.9e-16, 0), (0, 0, 1)), 8 * 360 / CIRPATTERN3_COUNT))


with BuildPart() as cirpattern3_9:
    # CirPattern3: pattern copy
    add(body_3.part.rotate(Axis((1e-16, -4.9e-16, 0), (0, 0, 1)), 9 * 360 / CIRPATTERN3_COUNT))


with BuildPart() as cirpattern3_10:
    # CirPattern3: pattern copy
    add(body_3.part.rotate(Axis((1e-16, -4.9e-16, 0), (0, 0, 1)), 10 * 360 / CIRPATTERN3_COUNT))


with BuildPart() as cirpattern3_11:
    # CirPattern3: pattern copy
    add(body_3.part.rotate(Axis((1e-16, -4.9e-16, 0), (0, 0, 1)), 11 * 360 / CIRPATTERN3_COUNT))


with BuildPart() as cirpattern3_12:
    # CirPattern3: pattern copy
    add(body_3.part.rotate(Axis((1e-16, -4.9e-16, 0), (0, 0, 1)), 12 * 360 / CIRPATTERN3_COUNT))


with BuildPart() as cirpattern3_13:
    # CirPattern3: pattern copy
    add(body_3.part.rotate(Axis((1e-16, -4.9e-16, 0), (0, 0, 1)), 13 * 360 / CIRPATTERN3_COUNT))


with BuildPart() as cirpattern3_14:
    # CirPattern3: pattern copy
    add(body_3.part.rotate(Axis((1e-16, -4.9e-16, 0), (0, 0, 1)), 14 * 360 / CIRPATTERN3_COUNT))


with BuildPart() as cirpattern3_15:
    # CirPattern3: pattern copy
    add(body_3.part.rotate(Axis((1e-16, -4.9e-16, 0), (0, 0, 1)), 15 * 360 / CIRPATTERN3_COUNT))


with BuildPart() as cirpattern3_16:
    # CirPattern3: pattern copy
    add(body_3.part.rotate(Axis((1e-16, -4.9e-16, 0), (0, 0, 1)), 16 * 360 / CIRPATTERN3_COUNT))


solid = Compound([part.part, body_2.part, body_3.part, cirpattern3_1.part, cirpattern3_2.part, cirpattern3_3.part, cirpattern3_4.part, cirpattern3_5.part, cirpattern3_6.part, cirpattern3_7.part, cirpattern3_8.part, cirpattern3_9.part, cirpattern3_10.part, cirpattern3_11.part, cirpattern3_12.part, cirpattern3_13.part, cirpattern3_14.part, cirpattern3_15.part, cirpattern3_16.part])
